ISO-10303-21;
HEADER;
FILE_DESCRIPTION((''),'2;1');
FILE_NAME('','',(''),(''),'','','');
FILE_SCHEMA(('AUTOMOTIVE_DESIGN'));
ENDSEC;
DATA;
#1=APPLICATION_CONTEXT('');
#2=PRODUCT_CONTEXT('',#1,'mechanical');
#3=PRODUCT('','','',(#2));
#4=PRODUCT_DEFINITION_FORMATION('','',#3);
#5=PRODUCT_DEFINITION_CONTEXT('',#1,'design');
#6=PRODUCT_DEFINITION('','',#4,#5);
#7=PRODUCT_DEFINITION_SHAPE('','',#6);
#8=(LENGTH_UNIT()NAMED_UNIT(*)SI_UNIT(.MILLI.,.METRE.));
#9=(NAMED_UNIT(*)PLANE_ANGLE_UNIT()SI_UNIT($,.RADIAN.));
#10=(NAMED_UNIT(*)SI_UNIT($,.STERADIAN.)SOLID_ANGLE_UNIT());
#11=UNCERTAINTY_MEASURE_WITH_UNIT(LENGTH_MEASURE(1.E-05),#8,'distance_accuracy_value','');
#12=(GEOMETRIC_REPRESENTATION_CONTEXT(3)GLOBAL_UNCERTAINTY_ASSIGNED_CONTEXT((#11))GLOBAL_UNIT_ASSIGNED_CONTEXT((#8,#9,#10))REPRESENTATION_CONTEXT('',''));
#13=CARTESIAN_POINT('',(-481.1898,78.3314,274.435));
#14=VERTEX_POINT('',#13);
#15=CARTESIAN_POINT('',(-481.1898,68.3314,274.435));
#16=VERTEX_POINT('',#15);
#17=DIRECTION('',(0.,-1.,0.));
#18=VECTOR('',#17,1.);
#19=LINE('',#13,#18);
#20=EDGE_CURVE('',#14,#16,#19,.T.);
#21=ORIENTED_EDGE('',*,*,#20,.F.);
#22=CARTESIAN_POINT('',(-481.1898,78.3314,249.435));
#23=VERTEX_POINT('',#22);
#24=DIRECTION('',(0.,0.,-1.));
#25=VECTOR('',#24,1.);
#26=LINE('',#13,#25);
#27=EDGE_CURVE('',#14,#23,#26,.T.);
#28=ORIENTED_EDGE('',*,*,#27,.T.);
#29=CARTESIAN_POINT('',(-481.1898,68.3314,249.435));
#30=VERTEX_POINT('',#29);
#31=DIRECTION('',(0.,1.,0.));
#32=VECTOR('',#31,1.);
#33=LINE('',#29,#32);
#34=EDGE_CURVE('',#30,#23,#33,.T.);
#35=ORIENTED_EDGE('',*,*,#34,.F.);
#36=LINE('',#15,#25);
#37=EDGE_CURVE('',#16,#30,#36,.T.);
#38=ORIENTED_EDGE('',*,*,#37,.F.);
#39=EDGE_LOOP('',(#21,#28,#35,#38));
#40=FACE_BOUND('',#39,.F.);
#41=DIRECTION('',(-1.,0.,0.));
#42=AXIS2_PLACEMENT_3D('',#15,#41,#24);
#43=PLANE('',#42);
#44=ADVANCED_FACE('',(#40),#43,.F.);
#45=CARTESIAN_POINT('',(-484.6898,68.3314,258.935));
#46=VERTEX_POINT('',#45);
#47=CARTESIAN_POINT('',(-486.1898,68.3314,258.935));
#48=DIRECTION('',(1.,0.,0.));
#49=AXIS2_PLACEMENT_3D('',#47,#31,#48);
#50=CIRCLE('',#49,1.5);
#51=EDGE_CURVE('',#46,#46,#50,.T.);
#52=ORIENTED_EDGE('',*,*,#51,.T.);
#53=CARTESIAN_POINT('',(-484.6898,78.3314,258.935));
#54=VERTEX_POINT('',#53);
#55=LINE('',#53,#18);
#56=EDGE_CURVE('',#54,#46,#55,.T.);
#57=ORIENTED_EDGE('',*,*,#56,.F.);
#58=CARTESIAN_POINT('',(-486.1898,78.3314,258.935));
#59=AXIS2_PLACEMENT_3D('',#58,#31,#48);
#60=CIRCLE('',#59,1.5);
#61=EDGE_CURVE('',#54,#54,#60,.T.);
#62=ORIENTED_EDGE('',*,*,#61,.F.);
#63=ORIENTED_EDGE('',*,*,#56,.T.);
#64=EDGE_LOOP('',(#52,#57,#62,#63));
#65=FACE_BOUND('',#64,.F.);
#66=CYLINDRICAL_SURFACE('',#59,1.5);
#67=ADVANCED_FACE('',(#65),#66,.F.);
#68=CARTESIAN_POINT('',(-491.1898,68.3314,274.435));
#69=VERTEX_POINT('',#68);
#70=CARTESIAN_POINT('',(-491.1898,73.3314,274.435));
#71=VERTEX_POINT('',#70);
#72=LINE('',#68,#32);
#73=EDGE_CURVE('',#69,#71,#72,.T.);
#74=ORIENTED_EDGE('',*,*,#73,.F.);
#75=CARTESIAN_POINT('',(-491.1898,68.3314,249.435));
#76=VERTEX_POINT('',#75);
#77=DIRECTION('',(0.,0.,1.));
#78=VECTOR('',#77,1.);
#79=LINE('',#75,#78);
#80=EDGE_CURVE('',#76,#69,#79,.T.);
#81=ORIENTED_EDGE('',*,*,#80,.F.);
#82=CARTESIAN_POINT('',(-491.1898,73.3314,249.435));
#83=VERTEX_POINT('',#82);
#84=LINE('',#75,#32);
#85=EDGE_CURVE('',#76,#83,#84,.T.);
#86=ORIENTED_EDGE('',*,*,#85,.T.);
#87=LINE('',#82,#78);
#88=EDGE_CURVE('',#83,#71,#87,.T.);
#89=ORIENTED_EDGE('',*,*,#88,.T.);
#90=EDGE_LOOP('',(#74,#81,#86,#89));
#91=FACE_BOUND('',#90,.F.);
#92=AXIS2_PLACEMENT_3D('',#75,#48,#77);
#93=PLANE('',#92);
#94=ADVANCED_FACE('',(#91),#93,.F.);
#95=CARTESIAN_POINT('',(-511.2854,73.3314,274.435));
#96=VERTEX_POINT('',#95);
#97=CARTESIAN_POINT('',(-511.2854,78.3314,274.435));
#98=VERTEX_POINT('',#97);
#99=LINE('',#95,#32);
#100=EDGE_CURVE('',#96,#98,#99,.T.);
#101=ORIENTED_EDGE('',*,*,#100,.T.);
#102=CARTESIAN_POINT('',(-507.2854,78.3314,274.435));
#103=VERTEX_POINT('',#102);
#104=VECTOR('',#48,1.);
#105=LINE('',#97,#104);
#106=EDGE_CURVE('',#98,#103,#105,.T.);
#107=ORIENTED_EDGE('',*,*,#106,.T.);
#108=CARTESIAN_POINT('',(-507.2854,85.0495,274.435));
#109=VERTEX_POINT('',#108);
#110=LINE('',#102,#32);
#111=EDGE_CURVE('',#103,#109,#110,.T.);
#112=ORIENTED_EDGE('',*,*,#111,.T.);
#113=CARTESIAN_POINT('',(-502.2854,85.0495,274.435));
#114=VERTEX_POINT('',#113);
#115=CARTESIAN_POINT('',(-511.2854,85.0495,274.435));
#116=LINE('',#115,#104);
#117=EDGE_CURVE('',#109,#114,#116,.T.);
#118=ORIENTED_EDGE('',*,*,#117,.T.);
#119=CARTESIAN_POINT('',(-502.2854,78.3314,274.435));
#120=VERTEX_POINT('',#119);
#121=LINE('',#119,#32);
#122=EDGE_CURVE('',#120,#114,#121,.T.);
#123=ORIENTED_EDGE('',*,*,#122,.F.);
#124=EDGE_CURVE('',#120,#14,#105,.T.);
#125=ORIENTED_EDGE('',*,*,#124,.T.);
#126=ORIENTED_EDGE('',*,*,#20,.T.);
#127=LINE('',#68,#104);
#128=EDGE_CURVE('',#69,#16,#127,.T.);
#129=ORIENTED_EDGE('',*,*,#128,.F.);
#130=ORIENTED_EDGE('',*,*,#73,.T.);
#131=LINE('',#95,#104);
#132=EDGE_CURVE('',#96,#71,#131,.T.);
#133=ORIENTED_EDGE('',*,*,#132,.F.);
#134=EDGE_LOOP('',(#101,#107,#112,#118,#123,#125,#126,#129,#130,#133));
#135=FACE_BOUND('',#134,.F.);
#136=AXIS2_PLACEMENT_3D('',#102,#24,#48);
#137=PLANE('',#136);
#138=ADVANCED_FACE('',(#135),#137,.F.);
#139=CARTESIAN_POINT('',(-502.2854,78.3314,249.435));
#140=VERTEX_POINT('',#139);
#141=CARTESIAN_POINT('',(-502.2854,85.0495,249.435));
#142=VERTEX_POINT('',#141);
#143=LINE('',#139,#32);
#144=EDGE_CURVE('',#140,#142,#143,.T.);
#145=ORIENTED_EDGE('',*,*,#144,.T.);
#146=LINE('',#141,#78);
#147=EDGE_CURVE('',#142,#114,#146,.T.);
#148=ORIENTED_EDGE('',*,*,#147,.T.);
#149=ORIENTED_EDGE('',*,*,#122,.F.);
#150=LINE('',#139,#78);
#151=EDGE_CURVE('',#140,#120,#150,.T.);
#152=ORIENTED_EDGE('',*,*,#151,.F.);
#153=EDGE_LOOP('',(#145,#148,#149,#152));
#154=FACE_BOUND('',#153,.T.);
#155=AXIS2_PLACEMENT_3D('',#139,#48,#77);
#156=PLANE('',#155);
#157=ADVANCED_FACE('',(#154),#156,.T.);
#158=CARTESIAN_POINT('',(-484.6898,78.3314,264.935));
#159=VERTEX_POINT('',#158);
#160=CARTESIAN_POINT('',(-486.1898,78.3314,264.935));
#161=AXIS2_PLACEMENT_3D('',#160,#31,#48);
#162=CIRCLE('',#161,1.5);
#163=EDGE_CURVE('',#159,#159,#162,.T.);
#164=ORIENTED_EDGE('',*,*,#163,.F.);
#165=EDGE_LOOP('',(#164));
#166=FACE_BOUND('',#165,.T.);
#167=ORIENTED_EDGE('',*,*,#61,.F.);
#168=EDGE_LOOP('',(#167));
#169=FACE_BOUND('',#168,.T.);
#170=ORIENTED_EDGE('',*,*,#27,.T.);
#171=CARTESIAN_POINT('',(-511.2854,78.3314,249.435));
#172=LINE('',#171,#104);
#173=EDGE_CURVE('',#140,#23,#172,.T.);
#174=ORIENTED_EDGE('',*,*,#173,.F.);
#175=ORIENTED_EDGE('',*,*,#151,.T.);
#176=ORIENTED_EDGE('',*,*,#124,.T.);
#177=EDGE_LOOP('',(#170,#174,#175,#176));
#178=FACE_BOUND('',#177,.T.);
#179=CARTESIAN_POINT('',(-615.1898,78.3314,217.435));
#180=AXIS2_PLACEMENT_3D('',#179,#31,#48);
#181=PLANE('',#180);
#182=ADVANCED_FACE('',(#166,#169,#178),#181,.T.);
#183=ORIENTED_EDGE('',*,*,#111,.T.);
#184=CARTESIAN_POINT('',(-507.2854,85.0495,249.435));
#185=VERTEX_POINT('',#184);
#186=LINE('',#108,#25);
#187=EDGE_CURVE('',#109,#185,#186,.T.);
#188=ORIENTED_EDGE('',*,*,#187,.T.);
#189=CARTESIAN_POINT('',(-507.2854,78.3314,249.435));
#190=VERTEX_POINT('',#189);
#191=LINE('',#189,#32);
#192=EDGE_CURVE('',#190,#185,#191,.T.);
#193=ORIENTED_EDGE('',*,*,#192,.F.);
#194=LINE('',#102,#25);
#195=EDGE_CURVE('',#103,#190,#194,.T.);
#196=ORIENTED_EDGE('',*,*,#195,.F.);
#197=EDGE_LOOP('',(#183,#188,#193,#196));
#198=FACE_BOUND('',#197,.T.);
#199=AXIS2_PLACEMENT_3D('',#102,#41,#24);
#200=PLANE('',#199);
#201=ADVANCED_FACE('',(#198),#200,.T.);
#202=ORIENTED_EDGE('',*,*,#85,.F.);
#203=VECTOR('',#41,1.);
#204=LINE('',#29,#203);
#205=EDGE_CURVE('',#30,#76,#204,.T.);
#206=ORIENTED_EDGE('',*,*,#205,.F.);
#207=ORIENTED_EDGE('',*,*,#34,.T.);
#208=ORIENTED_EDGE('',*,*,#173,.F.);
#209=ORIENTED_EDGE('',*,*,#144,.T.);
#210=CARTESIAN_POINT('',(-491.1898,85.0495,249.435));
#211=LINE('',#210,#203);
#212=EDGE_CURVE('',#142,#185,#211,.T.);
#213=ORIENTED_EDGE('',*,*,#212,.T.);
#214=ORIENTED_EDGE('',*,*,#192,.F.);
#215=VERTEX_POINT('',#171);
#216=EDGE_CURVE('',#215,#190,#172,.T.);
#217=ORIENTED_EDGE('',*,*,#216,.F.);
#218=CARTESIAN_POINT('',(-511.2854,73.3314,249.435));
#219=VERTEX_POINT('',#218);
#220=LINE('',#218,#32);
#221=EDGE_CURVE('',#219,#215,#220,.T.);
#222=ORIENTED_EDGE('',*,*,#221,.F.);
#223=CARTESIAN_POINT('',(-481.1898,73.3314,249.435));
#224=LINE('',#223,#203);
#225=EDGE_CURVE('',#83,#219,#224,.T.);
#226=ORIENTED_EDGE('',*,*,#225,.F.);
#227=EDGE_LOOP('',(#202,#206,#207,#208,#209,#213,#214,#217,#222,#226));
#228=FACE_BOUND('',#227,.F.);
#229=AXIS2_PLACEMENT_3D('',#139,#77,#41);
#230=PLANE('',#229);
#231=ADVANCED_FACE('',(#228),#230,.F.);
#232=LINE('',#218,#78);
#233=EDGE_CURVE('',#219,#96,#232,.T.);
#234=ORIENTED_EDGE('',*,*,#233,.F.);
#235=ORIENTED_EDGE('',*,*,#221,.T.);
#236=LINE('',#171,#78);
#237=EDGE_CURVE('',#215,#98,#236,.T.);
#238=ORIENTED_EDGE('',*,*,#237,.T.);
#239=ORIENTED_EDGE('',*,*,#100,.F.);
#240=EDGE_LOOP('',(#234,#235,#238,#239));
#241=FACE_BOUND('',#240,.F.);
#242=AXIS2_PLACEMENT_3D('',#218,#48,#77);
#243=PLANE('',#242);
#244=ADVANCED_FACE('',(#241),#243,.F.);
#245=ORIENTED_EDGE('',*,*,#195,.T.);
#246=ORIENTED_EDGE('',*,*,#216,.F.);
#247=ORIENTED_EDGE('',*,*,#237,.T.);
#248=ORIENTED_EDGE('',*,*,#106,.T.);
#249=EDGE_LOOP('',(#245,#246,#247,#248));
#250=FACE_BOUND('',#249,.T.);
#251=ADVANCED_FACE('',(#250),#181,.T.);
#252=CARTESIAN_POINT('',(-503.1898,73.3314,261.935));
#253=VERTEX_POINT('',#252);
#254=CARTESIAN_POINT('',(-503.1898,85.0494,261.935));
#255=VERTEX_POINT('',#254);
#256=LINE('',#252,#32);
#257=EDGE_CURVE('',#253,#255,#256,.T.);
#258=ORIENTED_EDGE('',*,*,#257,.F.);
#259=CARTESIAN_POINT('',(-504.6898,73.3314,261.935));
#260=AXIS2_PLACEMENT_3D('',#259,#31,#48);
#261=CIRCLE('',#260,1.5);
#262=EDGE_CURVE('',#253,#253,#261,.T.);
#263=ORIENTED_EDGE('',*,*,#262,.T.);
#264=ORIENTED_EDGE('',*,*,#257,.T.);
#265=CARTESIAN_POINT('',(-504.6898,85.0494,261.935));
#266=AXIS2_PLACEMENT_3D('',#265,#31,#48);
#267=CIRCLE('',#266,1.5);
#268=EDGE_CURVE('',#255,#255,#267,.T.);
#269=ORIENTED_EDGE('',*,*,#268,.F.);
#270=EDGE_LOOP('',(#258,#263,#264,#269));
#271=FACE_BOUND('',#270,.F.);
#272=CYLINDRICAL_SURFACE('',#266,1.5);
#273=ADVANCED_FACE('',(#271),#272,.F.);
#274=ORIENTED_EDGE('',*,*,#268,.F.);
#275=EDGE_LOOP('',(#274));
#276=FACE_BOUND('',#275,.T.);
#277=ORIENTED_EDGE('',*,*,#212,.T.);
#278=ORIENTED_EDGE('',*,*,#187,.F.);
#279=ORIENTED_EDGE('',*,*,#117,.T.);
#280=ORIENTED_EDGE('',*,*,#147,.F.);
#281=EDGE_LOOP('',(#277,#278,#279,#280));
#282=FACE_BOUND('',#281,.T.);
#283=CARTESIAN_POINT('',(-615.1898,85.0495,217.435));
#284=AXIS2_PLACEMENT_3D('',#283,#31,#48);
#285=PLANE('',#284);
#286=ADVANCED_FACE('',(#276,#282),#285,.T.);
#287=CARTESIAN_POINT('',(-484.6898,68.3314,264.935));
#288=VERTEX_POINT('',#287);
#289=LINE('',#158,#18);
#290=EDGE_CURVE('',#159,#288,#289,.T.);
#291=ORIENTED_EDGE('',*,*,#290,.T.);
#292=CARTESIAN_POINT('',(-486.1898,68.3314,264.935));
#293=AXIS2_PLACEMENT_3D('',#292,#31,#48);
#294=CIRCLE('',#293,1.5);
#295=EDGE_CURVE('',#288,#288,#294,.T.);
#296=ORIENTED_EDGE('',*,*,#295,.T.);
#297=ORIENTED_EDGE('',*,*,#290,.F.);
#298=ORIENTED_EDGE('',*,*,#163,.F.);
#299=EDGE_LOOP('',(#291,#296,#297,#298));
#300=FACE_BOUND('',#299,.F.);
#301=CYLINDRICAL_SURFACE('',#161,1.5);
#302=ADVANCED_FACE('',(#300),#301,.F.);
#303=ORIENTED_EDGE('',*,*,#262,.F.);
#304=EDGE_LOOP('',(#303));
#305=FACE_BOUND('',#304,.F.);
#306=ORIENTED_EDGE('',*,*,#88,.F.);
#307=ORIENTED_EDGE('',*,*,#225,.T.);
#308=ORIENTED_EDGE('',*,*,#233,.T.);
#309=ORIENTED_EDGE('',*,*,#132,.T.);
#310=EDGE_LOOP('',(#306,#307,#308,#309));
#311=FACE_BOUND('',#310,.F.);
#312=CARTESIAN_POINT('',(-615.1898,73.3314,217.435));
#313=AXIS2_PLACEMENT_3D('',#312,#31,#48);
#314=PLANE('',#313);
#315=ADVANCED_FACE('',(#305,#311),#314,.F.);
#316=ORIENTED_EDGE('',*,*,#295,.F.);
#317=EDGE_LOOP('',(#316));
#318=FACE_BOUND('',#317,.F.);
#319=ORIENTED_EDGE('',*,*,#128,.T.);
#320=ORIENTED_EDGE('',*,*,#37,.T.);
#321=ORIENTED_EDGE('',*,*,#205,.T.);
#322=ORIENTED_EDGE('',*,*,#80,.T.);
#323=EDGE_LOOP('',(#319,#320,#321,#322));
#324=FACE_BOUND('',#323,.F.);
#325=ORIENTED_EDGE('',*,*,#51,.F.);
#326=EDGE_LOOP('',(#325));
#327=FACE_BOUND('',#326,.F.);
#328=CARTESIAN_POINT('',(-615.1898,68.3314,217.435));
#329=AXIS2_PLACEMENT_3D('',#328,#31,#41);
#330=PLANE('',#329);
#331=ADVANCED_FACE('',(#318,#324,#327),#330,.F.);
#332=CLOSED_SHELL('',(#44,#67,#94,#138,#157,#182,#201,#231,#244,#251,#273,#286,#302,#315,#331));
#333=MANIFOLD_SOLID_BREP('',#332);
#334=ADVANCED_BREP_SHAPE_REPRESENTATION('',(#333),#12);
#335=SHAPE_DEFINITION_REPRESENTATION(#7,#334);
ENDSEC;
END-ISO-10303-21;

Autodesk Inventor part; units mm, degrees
ref_plane "YZ Plane" through (0, 0, 0) normal (1, 0, 0) x (0, 1, 0)
ref_plane "XZ Plane" through (0, 0, 0) normal (0, 1, 0) x (-1, 0, 0)
ref_plane "XY Plane" through (0, 0, 0) normal (0, 0, 1) x (1, 0, 0)
ref_plane "РабПлоскость1" through (-615.1898, 68.3314, 217.435) normal (0, 1, 0) x (-1, 0, 0)
sketch "Эскиз1" plane through (-615.1898, 68.3314, 217.435) normal (0, 1, 0) x (-1, 0, 0)
  circle A0 centre (-129, 47.5) radius 2 projected
  circle A1 centre (-129, 41.5) radius 2 projected
  line L0 (-129, 47.5) -> (-129, 41.5)
  line L1 (-134, 32) -> (-124, 32)
  line L2 (-124, 32) -> (-124, 57)
  line L3 (-124, 57) -> (-134, 57)
  line L4 (-134, 57) -> (-134, 32)
  line L5 (-134, 32) -> (-124, 57) construction
  line L6 (-124, 32) -> (-134, 57) construction
  point P0 (-615.1898, -217.435)
  point P1 (-129, 44.5)
  dimension "d0" = 25
  dimension "d1" = 10
extrude "Выдавливание1" add sketch "Эскиз1" along normal blind 5
sketch "Эскиз2" plane through (-615.1898, 73.3314, 217.435) normal (0, 1, 0) x (1, 0, 0)
  point P0 (615.1898, 217.435)
sketch "Эскиз3" plane through (-615.1898, 73.3314, 217.435) normal (0, 1, 0) x (1, 0, 0)
  point P0 (615.1898, 217.435)
sketch "Эскиз4" plane through (-615.1898, 73.3314, 217.435) normal (0, 1, 0) x (1, 0, 0)
  line L0 (134, -32) -> (124, -32) projected
  line L1 (134, -32) -> (103.9044, -32)
  line L2 (103.9044, -32) -> (103.9044, -57)
  line L3 (103.9044, -57) -> (134, -57)
  line L4 (134, -57) -> (134, -32)
  circle A0 centre (110.5, -44.5) radius 1.5 projected
  point P0 (615.1898, 217.435)
extrude "Выдавливание2" add sketch "Эскиз4" along normal blind 5
sketch "Эскиз5" plane through (-615.1898, 78.3314, 217.435) normal (0, 1, 0) x (1, 0, 0)
  line L0 (124, -32) -> (103.9044, -32) projected
  line L1 (103.9044, -57) -> (124, -57) projected
  line L2 (107.9044, -32) -> (112.9044, -32)
  line L3 (112.9044, -32) -> (112.9044, -57)
  line L4 (112.9044, -57) -> (107.9044, -57)
  line L5 (107.9044, -57) -> (107.9044, -32)
  line L6 (103.9044, -32) -> (103.9044, -57) projected
  point P0 (615.1898, 217.435)
  point P1 (107.9044, -57)
  point P2 (112.9044, -32)
  dimension "d6" = 4
  dimension "d7" = 5
extrude "Выдавливание3" add sketch "Эскиз5" along normal up to surface (6.7181 mm away) contours L3 L1 L5 L0
sketch "Эскиз6" plane through (-507.2854, 85.0494, 274.435) normal (0, 1, 0) x (1, 0, 0)
  circle A0 centre (2.5956, 12.5) radius 1.5 projected
  point P0 (507.2854, 274.435)
extrude "Выдавливание4" cut sketch "Эскиз6" against normal blind 17
sketch "Эскиз7" plane through (-615.1898, 68.3314, 217.435) normal (0, -1, 0) x (1, 0, 0)
  circle A0 centre (129, 41.5) radius 2
  circle A1 centre (129, 47.5) radius 2
  point P0 (615.1898, -217.435)
extrude "Выдавливание5" cut sketch "Эскиз7" against normal blind 14.5
sketch "Эскиз8" plane through (-615.1898, 78.3314, 217.435) normal (0, 1, 0) x (1, 0, 0)
  circle A0 centre (129, -41.5) radius 2 projected
  circle A1 centre (129, -47.5) radius 2 projected
  circle A2 centre (129, -41.5) radius 1.5
  circle A3 centre (129, -47.5) radius 1.5
  point P0 (615.1898, 217.435)
  dimension "d14" = 3
  dimension "d15" = 3
extrude "Выдавливание6" add sketch "Эскиз8" against normal up to surface (10 mm away)
sketch "Эскиз9" plane through (-507.2854, 85.0494, 274.435) normal (0, 1, 0) x (1, 0, 0)
  point P0 (507.2854, 274.435)
properties part number "крепление tcrt5000"
